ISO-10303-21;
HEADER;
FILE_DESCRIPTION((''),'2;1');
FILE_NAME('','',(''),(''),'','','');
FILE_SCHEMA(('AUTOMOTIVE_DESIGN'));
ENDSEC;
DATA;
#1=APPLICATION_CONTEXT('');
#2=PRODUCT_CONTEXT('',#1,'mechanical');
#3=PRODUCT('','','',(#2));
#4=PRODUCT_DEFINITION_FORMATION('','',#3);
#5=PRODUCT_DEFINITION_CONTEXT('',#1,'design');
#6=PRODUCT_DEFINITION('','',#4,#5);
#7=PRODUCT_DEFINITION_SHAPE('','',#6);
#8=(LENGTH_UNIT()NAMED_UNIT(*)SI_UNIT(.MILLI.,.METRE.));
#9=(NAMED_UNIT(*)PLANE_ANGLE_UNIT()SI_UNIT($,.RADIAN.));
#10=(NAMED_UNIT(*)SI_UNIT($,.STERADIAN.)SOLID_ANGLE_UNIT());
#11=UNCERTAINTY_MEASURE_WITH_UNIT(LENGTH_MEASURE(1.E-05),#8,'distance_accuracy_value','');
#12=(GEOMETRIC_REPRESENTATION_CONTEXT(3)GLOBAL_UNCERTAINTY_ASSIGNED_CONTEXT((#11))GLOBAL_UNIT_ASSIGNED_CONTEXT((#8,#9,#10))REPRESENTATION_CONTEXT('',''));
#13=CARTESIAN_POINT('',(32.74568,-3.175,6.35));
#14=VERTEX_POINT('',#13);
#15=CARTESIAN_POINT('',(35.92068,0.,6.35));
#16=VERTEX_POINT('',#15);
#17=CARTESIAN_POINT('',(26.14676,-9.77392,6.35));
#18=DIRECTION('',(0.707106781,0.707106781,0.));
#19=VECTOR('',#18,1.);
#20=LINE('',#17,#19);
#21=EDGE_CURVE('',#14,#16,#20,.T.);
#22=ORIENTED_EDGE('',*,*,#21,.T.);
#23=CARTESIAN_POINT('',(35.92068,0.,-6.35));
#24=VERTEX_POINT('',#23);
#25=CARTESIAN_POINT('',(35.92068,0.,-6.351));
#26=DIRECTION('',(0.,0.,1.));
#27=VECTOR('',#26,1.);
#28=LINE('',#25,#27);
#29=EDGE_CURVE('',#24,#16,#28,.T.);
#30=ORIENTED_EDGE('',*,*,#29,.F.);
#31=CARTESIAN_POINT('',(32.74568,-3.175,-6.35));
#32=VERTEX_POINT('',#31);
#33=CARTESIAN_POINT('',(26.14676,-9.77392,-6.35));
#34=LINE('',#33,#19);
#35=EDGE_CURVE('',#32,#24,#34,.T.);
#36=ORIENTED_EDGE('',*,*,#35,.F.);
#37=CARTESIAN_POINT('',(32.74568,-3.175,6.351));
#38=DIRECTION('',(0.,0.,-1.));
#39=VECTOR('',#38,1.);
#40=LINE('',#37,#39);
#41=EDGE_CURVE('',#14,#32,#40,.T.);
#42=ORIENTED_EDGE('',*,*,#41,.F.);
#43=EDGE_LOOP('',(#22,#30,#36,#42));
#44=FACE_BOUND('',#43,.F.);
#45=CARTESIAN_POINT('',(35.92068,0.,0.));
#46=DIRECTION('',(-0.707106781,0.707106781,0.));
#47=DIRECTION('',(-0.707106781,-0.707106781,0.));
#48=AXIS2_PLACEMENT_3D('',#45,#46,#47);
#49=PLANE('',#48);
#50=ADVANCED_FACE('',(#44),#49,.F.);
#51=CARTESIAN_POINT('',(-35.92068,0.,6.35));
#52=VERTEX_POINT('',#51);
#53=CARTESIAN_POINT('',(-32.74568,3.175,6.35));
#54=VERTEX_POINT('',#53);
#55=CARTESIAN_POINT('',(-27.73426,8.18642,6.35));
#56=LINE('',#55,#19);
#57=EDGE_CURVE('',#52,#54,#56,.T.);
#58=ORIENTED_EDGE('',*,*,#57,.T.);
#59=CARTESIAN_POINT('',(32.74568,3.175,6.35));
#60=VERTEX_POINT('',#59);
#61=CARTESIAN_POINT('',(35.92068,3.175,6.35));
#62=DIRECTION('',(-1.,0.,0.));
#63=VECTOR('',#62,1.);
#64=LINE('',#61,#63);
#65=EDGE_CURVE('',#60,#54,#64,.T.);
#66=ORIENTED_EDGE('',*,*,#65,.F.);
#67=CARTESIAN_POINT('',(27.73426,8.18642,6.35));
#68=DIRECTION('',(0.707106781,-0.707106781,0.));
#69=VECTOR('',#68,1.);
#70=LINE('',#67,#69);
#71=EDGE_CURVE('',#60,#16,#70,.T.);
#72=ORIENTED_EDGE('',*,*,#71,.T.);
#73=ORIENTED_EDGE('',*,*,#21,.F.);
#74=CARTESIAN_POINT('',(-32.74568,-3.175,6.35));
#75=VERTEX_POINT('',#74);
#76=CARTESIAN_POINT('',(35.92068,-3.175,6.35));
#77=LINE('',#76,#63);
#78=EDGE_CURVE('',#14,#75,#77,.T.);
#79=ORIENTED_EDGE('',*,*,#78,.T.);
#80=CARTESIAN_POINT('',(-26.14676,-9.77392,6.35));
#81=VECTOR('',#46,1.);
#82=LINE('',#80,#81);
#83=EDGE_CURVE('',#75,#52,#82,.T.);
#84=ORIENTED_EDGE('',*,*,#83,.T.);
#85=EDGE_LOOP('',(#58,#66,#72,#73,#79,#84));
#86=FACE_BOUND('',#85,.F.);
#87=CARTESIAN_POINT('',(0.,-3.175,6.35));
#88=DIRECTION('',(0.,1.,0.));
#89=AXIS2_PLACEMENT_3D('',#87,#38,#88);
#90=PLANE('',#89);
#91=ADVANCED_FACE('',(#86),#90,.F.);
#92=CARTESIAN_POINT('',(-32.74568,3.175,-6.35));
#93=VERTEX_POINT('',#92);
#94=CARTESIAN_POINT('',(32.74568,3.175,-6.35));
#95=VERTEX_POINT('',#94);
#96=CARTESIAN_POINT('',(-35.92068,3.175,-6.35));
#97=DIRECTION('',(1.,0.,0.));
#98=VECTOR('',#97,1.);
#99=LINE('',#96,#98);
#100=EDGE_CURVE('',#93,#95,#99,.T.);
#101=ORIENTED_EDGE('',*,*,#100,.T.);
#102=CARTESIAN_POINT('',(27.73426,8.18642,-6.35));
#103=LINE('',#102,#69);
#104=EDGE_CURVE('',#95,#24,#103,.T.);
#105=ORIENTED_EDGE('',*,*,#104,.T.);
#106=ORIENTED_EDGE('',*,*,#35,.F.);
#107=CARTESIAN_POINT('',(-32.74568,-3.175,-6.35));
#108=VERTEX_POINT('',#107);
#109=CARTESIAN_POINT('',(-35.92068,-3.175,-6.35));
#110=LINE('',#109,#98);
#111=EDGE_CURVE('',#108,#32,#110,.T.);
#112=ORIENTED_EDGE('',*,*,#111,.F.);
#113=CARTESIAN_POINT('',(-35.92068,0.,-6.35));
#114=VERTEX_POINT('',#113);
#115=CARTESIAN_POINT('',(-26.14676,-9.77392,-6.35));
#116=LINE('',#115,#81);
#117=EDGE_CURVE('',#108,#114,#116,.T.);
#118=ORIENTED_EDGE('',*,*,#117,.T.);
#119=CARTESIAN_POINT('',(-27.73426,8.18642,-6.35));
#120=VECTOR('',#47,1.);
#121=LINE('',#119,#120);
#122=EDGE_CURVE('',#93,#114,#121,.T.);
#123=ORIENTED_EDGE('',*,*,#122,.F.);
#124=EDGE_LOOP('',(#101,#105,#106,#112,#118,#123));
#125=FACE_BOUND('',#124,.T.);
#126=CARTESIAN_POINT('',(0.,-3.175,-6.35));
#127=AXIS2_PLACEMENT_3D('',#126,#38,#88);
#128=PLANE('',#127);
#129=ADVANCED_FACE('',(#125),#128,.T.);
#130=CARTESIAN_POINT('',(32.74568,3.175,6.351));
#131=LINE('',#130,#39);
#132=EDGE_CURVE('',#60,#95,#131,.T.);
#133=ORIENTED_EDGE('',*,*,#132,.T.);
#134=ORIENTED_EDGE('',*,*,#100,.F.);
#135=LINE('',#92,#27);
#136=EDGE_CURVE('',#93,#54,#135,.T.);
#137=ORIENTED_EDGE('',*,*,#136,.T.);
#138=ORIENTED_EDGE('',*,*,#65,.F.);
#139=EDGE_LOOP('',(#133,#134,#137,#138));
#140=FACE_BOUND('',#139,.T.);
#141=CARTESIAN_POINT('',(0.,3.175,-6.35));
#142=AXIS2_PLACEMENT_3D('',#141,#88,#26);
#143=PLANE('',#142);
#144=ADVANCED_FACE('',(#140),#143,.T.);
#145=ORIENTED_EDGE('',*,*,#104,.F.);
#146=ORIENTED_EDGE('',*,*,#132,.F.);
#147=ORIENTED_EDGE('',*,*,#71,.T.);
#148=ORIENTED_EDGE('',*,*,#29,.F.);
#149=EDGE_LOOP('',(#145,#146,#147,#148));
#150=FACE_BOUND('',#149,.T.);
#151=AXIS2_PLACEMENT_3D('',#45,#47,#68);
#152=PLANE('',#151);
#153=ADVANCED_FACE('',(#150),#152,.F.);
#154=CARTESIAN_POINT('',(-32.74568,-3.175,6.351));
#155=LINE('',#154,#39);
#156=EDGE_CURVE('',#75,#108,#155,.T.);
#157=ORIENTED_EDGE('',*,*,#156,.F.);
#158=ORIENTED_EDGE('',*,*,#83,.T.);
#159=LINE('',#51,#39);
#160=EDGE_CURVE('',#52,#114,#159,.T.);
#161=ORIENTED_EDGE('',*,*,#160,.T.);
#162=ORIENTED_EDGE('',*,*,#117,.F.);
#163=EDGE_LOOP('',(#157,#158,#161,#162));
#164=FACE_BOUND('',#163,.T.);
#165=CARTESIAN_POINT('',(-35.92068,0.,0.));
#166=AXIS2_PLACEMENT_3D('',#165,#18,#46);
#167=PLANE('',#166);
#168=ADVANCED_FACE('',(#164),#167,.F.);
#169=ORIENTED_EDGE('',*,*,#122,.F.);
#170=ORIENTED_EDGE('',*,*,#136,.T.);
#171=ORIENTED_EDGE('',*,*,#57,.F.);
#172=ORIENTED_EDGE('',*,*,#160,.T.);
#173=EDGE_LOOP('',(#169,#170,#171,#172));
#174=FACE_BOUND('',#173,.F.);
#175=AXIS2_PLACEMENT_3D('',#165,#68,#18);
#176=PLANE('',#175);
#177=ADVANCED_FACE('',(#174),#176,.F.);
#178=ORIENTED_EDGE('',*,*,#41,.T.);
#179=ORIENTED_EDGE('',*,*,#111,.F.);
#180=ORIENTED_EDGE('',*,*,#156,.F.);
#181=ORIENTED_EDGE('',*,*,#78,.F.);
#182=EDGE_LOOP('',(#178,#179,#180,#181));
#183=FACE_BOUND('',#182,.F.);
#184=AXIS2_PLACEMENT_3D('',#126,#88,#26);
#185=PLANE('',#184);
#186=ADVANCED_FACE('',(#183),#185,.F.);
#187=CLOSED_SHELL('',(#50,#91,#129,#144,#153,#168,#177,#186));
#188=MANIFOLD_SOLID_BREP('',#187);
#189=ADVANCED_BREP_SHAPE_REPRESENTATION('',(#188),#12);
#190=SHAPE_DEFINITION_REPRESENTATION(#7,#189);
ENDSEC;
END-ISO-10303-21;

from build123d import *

# Parameters (mm, degrees)
F0_W             = 6.35
F0_H             = 12.7
F1_DEPTH         = 35.92068
F3_DEPTH         = 6.351
F3_DEPTH_BACK    = 6.351
F3_COPIES2_COUNT = 2


# Not quite as in the source:
# - a pattern or mirror of a feature is missing from the dataset's text; its kind, count and spacing are read off the source's solid


with BuildPart() as f1:
    # F0 (on Right) → F1 (new body, symmetric)
    with BuildSketch(Plane.YZ):
        Rectangle(F0_W, F0_H)
    extrude(amount=F1_DEPTH, both=True)

    # F2 (on Top) → F3 (cut, two sides)
    with BuildSketch(Plane.XY) as f3_sk:
        Polygon((-35.92068, 3.175), (-35.92068, 0), (-32.74568, 3.175), align=None)
    f3 = extrude(amount=-F3_DEPTH, mode=Mode.SUBTRACT) + extrude(f3_sk.sketch, amount=F3_DEPTH_BACK, mode=Mode.SUBTRACT)

    # F3_copies: F3 across plane
    add(f3.mirror(Plane(origin=(0, 0, 0), x_dir=(0, 0, -1), z_dir=(0, -1, 0))), mode=Mode.SUBTRACT)

    # F3_copies1: F3 across plane
    add(f3.mirror(Plane(origin=(0, 0, 0), x_dir=(0, 0, 1), z_dir=(1, 0, 0))), mode=Mode.SUBTRACT)

    # F3_copies2: F3 ×2 about axis
    f3_copies2_axis = Axis((0, 0, 0), (0, 0, 1))
    for i in range(1, F3_COPIES2_COUNT):
        add(f3.rotate(f3_copies2_axis, i * 360 / F3_COPIES2_COUNT), mode=Mode.SUBTRACT)


solid = f1.part
